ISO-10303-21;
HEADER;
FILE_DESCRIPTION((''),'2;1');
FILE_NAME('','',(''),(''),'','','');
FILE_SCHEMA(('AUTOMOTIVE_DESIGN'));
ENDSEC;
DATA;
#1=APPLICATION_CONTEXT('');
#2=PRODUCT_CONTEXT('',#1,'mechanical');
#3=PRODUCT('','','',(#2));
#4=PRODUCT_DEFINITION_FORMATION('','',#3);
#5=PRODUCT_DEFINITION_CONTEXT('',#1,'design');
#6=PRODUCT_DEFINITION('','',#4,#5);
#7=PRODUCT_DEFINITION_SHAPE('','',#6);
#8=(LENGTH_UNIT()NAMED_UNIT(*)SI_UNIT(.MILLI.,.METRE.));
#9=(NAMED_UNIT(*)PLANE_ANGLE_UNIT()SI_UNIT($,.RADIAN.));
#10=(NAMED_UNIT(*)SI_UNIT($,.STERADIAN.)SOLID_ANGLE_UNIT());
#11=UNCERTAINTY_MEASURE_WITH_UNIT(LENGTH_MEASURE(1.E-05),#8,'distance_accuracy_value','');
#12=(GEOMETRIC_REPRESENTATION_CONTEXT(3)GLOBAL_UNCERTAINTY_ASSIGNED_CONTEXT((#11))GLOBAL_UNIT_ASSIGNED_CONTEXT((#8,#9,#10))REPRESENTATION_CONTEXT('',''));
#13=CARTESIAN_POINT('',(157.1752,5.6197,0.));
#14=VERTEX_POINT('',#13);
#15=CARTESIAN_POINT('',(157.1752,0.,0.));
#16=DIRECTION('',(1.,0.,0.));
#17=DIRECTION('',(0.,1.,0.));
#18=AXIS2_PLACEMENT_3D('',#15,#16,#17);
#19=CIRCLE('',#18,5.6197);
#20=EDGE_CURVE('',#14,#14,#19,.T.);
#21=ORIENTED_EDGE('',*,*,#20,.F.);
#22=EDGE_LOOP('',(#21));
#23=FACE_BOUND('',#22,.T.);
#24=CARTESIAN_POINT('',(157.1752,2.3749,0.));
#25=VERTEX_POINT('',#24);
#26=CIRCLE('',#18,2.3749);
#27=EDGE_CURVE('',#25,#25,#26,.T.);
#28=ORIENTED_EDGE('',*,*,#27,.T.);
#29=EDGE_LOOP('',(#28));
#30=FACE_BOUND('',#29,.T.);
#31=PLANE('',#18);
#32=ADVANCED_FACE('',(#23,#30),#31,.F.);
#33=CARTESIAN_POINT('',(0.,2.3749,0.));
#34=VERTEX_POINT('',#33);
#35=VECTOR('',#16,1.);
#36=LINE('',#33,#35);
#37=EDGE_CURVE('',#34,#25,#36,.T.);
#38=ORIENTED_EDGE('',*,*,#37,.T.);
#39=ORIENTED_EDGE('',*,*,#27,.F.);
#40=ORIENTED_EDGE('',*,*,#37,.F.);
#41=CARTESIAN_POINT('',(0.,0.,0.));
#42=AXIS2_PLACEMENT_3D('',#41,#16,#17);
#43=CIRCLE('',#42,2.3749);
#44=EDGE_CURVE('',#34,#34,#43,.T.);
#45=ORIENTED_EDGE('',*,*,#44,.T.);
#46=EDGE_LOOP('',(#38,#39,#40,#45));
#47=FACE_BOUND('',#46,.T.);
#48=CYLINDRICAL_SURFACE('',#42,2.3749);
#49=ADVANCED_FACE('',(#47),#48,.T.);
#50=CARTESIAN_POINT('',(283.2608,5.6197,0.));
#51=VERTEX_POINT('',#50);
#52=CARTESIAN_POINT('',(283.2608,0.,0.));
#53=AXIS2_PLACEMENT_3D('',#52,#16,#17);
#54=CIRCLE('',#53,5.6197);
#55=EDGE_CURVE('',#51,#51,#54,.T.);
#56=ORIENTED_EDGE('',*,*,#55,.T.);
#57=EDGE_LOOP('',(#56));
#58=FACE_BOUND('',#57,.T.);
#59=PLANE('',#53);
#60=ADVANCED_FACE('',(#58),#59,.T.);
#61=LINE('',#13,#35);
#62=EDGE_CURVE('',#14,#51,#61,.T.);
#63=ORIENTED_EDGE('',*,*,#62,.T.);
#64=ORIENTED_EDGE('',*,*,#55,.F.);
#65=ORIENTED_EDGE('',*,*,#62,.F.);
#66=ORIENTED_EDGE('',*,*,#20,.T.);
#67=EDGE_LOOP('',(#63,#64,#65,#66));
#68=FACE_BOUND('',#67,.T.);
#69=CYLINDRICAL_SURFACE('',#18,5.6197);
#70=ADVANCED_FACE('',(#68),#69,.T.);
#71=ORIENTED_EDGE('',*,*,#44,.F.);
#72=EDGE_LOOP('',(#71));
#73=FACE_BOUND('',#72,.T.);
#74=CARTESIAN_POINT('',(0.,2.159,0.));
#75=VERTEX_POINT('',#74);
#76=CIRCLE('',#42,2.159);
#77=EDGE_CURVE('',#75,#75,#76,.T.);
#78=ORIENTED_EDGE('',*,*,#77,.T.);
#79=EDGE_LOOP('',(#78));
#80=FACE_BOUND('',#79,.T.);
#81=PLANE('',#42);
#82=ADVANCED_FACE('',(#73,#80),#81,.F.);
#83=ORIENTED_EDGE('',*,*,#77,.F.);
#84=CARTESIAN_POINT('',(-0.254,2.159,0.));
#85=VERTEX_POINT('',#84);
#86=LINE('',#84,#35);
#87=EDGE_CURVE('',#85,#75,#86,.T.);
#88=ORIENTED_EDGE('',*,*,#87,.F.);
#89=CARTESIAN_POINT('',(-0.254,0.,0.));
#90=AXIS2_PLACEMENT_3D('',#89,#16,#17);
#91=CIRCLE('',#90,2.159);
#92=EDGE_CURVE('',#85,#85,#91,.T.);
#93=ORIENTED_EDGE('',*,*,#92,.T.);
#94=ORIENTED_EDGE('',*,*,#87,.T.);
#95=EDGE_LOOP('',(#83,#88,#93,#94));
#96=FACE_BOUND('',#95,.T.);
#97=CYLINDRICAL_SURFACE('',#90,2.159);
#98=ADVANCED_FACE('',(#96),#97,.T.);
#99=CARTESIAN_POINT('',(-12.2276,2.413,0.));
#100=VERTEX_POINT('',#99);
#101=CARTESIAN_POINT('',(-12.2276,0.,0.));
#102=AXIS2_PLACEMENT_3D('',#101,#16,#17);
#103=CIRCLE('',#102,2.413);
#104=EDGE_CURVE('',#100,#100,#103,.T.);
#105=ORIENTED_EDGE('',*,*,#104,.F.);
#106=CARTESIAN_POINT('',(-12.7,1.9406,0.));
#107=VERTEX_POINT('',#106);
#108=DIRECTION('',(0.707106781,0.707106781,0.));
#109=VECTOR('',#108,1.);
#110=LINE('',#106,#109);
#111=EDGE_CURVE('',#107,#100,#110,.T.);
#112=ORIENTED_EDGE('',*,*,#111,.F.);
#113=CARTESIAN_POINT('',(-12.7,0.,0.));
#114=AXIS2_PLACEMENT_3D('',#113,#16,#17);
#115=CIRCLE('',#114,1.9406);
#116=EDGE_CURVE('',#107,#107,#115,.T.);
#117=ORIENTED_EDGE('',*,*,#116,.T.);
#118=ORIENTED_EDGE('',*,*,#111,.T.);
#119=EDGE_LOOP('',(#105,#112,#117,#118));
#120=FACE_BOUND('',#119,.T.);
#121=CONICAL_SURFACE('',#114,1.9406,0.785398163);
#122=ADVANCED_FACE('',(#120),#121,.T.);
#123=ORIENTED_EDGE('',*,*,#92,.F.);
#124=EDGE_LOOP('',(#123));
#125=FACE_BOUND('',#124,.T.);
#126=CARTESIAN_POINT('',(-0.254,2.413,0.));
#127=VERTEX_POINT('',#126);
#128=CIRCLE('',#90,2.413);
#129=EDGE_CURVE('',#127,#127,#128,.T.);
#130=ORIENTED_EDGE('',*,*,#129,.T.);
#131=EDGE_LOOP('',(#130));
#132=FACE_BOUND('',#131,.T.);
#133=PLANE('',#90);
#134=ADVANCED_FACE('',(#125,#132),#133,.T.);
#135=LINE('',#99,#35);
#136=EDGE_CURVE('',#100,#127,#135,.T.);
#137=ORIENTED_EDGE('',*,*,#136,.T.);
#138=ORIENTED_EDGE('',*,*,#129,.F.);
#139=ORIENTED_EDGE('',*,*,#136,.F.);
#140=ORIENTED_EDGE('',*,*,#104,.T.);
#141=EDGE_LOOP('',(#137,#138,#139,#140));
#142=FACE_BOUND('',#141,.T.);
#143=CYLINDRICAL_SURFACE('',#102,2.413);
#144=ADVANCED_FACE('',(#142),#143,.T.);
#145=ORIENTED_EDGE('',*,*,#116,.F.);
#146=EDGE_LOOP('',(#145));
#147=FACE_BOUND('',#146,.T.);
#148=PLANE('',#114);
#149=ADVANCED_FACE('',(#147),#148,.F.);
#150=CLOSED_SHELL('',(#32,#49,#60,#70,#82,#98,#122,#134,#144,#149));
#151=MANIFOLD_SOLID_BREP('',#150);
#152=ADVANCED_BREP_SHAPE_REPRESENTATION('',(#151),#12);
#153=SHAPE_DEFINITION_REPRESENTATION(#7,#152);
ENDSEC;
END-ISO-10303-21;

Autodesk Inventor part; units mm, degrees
sketch "Sketch_1" plane through (0, 0, 0) normal (0, 0, 1) x (1, 0, 0)
  line L0 (283.2608, 0) -> (0, 0)
  line L1 (0, 0) -> (0, 2.3749)
  line L2 (0, 2.3749) -> (157.1752, 2.3749)
  line L3 (157.1752, 2.3749) -> (157.1752, 5.6197)
  line L4 (157.1752, 5.6197) -> (283.2608, 5.6197)
  line L5 (283.2608, 5.6197) -> (283.2608, 0)
  line L6 (283.2608, 0) -> (0, 0)
revolve "Revolution1" add sketch "Sketch_1" angle 360 about axis through (283.2608, 0, 0) along (1, 0, 0)
sketch "Sketch_3" plane through (0, 0, 0) normal (0, 0, 1) x (1, 0, 0)
  line L0 (0, 0) -> (-12.7, 0)
  line L1 (-12.7, 0) -> (-12.7, 1.9406)
  line L2 (-12.7, 1.9406) -> (-12.2276, 2.413)
  line L3 (-12.2276, 2.413) -> (0, 2.413)
  line L4 (0, 2.413) -> (0, 0)
  line L5 (0, 0) -> (-12.7, 0)
revolve "Revolution2" add sketch "Sketch_3" angle 360 about axis through (0, 0, 0) along (1, 0, 0)
thread "Thread1" size "10-32 UNF" class "2A" standard "ANSI Unified Screw Threads" full length
sketch "Sketch_30" plane through (0, 0, 0) normal (0, 0, 1) x (1, 0, 0)
  line L0 (0, 0) -> (-0.254, 0)
  line L1 (-0.254, 2.159) -> (0, 2.159)
  line L2 (0, 2.159) -> (0, 2.667)
  line L3 (0, 2.667) -> (-0.254, 2.667)
  line L4 (-0.254, 2.667) -> (-0.254, 2.159)
revolve "Revolution3" cut sketch "Sketch_30" angle 360 about axis through (0, 0, 0) along (1, 0, 0)
ref_plane "dia1_XY" through (0, 2.3749, 0) normal (1, 0, 0) x (0, 0, -1)
ref_plane "dia1_YZ" through (0, 2.3749, 0) normal (0, 0, -1) x (0, 1, 0)
ref_plane "dia1_ZX" through (0, 2.3749, 0) normal (0, 1, 0) x (1, 0, 0)
ref_plane "dia12_XY" through (0, 0, 6.1468) normal (1, 0, 0) x (0, 0, -1)
ref_plane "dia12_YZ" through (0, 0, 6.1468) normal (0, 0, -1) x (0, 1, 0)
ref_plane "dia12_ZX" through (0, 0, 6.1468) normal (0, 1, 0) x (1, 0, 0)
ref_plane "dia1r_XY" through (0, 0, 9.3726) normal (1, 0, 0) x (0, 0, -1)
ref_plane "dia1r_YZ" through (0, 0, 9.3726) normal (0, 0, -1) x (0, 1, 0)
ref_plane "dia1r_ZX" through (0, 0, 9.3726) normal (0, 1, 0) x (1, 0, 0)
ref_plane "dia2_XY" through (0, -2.3749, 0) normal (1, 0, 0) x (0, 0, -1)
ref_plane "dia2_YZ" through (0, -2.3749, 0) normal (0, 0, -1) x (0, 1, 0)
ref_plane "dia2_ZX" through (0, -2.3749, 0) normal (0, 1, 0) x (1, 0, 0)
ref_plane "dia22_XY" through (0, 0, -6.1468) normal (1, 0, 0) x (0, 0, -1)
ref_plane "dia22_YZ" through (0, 0, -6.1468) normal (0, 0, -1) x (0, 1, 0)
ref_plane "dia22_ZX" through (0, 0, -6.1468) normal (0, 1, 0) x (1, 0, 0)
ref_plane "dia2r_XY" through (0, 0, -9.3726) normal (1, 0, 0) x (0, 0, -1)
ref_plane "dia2r_YZ" through (0, 0, -9.3726) normal (0, 0, -1) x (0, 1, 0)
ref_plane "dia2r_ZX" through (0, 0, -9.3726) normal (0, 1, 0) x (1, 0, 0)
ref_plane "rl1_XY" through (-12.7, 0, 0) normal (1, 0, 0) x (0, 0, -1)
ref_plane "rl1_YZ" through (-12.7, 0, 0) normal (0, 0, -1) x (0, 1, 0)
ref_plane "rl1_ZX" through (-12.7, 0, 0) normal (0, 1, 0) x (1, 0, 0)
ref_plane "rl2_XY" through (0, 0, 0) normal (1, 0, 0) x (0, 0, -1)
ref_plane "rl2_YZ" through (0, 0, 0) normal (0, 0, -1) x (0, 1, 0)
ref_plane "rl2_ZX" through (0, 0, 0) normal (0, 1, 0) x (1, 0, 0)
ref_plane "rod_cp_XY" through (0, 0, 0) normal (1, 0, 0) x (0, 0, -1)
ref_plane "rod_cp_YZ" through (0, 0, 0) normal (0, 0, -1) x (0, 1, 0)
ref_plane "rod_cp_ZX" through (0, 0, 0) normal (0, 1, 0) x (1, 0, 0)
ref_plane "thd1_XY" through (-12.7, 2.413, 0) normal (1, 0, 0) x (0, 0, -1)
ref_plane "thd1_YZ" through (-12.7, 2.413, 0) normal (0, 0, -1) x (0, 1, 0)
ref_plane "thd1_ZX" through (-12.7, 2.413, 0) normal (0, 1, 0) x (1, 0, 0)
ref_plane "thd2_XY" through (-12.7, -2.413, 0) normal (1, 0, 0) x (0, 0, -1)
ref_plane "thd2_YZ" through (-12.7, -2.413, 0) normal (0, 0, -1) x (0, 1, 0)
ref_plane "thd2_ZX" through (-12.7, -2.413, 0) normal (0, 1, 0) x (1, 0, 0)
ref_plane "to_rod_clevis_XY" through (-12.7, 0, 0) normal (1, 0, 0) x (0, 0, -1)
ref_plane "to_rod_clevis_YZ" through (-12.7, 0, 0) normal (0, 0, -1) x (0, 1, 0)
ref_plane "to_rod_clevis_ZX" through (-12.7, 0, 0) normal (0, 1, 0) x (1, 0, 0)
properties part number "015.5-P0000_rod"
